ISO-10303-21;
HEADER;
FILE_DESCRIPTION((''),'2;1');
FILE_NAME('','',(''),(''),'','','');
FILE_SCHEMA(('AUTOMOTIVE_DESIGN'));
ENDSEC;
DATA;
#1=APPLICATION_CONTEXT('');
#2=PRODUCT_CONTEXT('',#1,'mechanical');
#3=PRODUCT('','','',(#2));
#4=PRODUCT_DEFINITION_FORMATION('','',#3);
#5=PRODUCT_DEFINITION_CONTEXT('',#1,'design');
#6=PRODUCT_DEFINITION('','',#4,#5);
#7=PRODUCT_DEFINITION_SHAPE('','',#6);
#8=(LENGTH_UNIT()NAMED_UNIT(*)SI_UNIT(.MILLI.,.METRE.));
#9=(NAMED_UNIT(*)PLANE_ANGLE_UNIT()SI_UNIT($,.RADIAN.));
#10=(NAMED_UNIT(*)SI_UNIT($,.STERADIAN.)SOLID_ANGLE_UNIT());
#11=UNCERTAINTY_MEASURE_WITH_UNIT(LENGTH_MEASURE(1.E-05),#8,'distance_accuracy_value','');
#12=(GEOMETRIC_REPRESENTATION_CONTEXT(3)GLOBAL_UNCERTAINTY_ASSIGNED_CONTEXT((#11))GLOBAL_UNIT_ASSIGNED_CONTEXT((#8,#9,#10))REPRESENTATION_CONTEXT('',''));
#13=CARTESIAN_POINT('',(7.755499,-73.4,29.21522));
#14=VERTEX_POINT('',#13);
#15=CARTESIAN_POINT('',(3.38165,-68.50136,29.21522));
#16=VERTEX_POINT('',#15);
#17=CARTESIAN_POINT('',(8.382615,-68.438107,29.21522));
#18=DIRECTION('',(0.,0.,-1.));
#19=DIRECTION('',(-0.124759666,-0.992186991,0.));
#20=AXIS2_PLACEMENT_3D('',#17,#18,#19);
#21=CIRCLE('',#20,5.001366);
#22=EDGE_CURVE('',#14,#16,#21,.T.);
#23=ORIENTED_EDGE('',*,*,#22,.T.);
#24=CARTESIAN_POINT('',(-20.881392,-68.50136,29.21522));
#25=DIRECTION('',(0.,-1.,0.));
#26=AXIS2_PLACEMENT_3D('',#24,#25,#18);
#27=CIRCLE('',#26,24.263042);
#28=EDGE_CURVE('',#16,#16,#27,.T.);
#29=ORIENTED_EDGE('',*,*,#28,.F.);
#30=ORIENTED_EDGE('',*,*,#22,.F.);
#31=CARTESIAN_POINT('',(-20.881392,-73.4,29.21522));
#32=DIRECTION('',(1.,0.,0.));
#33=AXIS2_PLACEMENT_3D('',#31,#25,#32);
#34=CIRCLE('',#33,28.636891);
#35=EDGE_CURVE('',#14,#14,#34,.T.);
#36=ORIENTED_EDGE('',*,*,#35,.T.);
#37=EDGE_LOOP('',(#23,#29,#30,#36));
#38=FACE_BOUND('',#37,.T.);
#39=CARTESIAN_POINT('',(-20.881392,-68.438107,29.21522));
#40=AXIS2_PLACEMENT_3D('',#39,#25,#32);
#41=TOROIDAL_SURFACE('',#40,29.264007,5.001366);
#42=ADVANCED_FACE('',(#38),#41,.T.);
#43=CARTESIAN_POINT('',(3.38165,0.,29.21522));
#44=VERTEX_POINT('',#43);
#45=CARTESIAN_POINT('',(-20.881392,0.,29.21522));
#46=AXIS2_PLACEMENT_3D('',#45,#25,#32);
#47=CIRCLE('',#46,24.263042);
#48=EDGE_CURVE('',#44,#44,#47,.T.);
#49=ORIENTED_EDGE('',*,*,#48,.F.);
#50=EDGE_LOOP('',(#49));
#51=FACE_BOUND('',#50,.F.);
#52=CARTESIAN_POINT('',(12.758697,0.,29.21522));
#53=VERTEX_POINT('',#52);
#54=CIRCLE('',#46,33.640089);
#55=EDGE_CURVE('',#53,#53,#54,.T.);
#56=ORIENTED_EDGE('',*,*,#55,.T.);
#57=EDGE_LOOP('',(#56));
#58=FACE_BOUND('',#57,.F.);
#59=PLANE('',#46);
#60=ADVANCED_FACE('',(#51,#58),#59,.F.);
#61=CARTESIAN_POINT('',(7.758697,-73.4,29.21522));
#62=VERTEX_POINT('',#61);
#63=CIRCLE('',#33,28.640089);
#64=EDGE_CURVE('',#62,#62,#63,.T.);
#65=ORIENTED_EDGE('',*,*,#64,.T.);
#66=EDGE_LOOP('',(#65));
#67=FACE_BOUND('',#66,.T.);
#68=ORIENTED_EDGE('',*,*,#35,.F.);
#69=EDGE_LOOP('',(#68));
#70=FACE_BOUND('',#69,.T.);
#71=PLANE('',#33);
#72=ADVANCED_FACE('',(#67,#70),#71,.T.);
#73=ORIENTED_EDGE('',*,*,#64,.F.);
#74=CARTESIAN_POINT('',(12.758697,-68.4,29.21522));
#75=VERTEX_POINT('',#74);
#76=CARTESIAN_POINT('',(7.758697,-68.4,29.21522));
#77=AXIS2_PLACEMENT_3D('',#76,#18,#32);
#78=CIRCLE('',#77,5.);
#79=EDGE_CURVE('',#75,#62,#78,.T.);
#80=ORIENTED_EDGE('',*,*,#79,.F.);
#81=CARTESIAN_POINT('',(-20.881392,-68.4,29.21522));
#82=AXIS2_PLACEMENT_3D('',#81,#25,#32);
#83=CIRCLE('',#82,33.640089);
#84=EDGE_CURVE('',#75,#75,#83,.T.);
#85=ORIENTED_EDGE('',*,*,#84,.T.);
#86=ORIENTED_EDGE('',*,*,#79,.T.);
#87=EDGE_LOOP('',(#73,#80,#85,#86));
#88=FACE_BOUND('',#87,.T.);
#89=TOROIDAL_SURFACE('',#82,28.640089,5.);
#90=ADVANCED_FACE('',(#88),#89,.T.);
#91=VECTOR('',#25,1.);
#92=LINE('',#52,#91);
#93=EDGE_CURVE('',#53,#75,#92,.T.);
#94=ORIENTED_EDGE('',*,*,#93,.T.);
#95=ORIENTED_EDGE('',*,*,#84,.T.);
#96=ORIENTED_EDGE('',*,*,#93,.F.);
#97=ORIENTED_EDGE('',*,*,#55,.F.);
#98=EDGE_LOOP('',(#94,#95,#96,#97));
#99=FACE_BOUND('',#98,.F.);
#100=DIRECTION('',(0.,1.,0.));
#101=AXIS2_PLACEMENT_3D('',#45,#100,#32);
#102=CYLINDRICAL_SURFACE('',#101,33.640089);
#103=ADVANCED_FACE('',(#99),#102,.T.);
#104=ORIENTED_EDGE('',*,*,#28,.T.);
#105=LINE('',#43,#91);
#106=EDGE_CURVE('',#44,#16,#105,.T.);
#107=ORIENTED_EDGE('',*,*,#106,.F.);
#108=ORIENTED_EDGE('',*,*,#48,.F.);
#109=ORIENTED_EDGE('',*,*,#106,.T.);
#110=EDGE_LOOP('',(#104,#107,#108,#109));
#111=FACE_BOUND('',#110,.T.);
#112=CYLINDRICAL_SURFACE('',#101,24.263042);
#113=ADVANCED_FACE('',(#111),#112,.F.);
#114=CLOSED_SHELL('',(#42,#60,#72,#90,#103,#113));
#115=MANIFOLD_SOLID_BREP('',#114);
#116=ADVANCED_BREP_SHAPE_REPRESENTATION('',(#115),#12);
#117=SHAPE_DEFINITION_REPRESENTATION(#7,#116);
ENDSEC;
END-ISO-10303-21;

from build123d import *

# Parameters (mm, degrees)
F0_R     = 33.6400886769
F0_R_2   = 24.263041798
F1_DEPTH = 73.4
F2_R     = 5


# Not quite as in the source:
# - a fillet or chamfer that OpenCascade refuses, or shapes differently, is made with other operations: its cross-section is extruded or revolved along the edge and cut away or added


with BuildPart() as f1:
    # F0 (on Front) → F1 (new body)
    with BuildSketch(Plane.XZ):
        with Locations((-20.8813920617, 29.2152203619)):
            Circle(F0_R)
        with Locations((-20.8813920617, 29.2152203619)):
            Circle(F0_R_2, mode=Mode.SUBTRACT)
    extrude(amount=F1_DEPTH)

    # F2
    f2_edges = [f1.edges().sort_by_distance(p)[0] for p in [
        (-54.521481, -73.4, 29.21522),
    ]]
    fillet(f2_edges, radius=F2_R)

    # F3: fillet of radius 5 on 1 edges, made by hand

    # F3_s1 → F3_t2 (revolve, cut)
    with BuildSketch(Plane.XY.offset(29.2152203619)):
        with BuildLine():
            ThreePointArc((7.7586467113, -73.4003968748), (4.6319918458, -71.7466536397), (3.3812497363, -68.4381069026))
            Line((3.3812497363, -68.4381069026), (2.8811131677, -68.4381069026))
            ThreePointArc((2.8811131677, -68.4381069026), (2.8815131677, -70.9190534513), (2.8815131677, -73.4))
            Line((2.8815131677, -73.4), (3.3816497363, -73.9001365685))
            ThreePointArc((3.3816497363, -73.9001365685), (5.5701482238, -73.9001365685), (7.6962498403, -73.896625872))
            Line((7.6962498403, -73.896625872), (7.7586467113, -73.4003968748))
        make_face()
    revolve(axis=Axis((-20.8813920617, -73.4, 29.2152203619), (0, -1, 0)), mode=Mode.SUBTRACT)


solid = f1.part
